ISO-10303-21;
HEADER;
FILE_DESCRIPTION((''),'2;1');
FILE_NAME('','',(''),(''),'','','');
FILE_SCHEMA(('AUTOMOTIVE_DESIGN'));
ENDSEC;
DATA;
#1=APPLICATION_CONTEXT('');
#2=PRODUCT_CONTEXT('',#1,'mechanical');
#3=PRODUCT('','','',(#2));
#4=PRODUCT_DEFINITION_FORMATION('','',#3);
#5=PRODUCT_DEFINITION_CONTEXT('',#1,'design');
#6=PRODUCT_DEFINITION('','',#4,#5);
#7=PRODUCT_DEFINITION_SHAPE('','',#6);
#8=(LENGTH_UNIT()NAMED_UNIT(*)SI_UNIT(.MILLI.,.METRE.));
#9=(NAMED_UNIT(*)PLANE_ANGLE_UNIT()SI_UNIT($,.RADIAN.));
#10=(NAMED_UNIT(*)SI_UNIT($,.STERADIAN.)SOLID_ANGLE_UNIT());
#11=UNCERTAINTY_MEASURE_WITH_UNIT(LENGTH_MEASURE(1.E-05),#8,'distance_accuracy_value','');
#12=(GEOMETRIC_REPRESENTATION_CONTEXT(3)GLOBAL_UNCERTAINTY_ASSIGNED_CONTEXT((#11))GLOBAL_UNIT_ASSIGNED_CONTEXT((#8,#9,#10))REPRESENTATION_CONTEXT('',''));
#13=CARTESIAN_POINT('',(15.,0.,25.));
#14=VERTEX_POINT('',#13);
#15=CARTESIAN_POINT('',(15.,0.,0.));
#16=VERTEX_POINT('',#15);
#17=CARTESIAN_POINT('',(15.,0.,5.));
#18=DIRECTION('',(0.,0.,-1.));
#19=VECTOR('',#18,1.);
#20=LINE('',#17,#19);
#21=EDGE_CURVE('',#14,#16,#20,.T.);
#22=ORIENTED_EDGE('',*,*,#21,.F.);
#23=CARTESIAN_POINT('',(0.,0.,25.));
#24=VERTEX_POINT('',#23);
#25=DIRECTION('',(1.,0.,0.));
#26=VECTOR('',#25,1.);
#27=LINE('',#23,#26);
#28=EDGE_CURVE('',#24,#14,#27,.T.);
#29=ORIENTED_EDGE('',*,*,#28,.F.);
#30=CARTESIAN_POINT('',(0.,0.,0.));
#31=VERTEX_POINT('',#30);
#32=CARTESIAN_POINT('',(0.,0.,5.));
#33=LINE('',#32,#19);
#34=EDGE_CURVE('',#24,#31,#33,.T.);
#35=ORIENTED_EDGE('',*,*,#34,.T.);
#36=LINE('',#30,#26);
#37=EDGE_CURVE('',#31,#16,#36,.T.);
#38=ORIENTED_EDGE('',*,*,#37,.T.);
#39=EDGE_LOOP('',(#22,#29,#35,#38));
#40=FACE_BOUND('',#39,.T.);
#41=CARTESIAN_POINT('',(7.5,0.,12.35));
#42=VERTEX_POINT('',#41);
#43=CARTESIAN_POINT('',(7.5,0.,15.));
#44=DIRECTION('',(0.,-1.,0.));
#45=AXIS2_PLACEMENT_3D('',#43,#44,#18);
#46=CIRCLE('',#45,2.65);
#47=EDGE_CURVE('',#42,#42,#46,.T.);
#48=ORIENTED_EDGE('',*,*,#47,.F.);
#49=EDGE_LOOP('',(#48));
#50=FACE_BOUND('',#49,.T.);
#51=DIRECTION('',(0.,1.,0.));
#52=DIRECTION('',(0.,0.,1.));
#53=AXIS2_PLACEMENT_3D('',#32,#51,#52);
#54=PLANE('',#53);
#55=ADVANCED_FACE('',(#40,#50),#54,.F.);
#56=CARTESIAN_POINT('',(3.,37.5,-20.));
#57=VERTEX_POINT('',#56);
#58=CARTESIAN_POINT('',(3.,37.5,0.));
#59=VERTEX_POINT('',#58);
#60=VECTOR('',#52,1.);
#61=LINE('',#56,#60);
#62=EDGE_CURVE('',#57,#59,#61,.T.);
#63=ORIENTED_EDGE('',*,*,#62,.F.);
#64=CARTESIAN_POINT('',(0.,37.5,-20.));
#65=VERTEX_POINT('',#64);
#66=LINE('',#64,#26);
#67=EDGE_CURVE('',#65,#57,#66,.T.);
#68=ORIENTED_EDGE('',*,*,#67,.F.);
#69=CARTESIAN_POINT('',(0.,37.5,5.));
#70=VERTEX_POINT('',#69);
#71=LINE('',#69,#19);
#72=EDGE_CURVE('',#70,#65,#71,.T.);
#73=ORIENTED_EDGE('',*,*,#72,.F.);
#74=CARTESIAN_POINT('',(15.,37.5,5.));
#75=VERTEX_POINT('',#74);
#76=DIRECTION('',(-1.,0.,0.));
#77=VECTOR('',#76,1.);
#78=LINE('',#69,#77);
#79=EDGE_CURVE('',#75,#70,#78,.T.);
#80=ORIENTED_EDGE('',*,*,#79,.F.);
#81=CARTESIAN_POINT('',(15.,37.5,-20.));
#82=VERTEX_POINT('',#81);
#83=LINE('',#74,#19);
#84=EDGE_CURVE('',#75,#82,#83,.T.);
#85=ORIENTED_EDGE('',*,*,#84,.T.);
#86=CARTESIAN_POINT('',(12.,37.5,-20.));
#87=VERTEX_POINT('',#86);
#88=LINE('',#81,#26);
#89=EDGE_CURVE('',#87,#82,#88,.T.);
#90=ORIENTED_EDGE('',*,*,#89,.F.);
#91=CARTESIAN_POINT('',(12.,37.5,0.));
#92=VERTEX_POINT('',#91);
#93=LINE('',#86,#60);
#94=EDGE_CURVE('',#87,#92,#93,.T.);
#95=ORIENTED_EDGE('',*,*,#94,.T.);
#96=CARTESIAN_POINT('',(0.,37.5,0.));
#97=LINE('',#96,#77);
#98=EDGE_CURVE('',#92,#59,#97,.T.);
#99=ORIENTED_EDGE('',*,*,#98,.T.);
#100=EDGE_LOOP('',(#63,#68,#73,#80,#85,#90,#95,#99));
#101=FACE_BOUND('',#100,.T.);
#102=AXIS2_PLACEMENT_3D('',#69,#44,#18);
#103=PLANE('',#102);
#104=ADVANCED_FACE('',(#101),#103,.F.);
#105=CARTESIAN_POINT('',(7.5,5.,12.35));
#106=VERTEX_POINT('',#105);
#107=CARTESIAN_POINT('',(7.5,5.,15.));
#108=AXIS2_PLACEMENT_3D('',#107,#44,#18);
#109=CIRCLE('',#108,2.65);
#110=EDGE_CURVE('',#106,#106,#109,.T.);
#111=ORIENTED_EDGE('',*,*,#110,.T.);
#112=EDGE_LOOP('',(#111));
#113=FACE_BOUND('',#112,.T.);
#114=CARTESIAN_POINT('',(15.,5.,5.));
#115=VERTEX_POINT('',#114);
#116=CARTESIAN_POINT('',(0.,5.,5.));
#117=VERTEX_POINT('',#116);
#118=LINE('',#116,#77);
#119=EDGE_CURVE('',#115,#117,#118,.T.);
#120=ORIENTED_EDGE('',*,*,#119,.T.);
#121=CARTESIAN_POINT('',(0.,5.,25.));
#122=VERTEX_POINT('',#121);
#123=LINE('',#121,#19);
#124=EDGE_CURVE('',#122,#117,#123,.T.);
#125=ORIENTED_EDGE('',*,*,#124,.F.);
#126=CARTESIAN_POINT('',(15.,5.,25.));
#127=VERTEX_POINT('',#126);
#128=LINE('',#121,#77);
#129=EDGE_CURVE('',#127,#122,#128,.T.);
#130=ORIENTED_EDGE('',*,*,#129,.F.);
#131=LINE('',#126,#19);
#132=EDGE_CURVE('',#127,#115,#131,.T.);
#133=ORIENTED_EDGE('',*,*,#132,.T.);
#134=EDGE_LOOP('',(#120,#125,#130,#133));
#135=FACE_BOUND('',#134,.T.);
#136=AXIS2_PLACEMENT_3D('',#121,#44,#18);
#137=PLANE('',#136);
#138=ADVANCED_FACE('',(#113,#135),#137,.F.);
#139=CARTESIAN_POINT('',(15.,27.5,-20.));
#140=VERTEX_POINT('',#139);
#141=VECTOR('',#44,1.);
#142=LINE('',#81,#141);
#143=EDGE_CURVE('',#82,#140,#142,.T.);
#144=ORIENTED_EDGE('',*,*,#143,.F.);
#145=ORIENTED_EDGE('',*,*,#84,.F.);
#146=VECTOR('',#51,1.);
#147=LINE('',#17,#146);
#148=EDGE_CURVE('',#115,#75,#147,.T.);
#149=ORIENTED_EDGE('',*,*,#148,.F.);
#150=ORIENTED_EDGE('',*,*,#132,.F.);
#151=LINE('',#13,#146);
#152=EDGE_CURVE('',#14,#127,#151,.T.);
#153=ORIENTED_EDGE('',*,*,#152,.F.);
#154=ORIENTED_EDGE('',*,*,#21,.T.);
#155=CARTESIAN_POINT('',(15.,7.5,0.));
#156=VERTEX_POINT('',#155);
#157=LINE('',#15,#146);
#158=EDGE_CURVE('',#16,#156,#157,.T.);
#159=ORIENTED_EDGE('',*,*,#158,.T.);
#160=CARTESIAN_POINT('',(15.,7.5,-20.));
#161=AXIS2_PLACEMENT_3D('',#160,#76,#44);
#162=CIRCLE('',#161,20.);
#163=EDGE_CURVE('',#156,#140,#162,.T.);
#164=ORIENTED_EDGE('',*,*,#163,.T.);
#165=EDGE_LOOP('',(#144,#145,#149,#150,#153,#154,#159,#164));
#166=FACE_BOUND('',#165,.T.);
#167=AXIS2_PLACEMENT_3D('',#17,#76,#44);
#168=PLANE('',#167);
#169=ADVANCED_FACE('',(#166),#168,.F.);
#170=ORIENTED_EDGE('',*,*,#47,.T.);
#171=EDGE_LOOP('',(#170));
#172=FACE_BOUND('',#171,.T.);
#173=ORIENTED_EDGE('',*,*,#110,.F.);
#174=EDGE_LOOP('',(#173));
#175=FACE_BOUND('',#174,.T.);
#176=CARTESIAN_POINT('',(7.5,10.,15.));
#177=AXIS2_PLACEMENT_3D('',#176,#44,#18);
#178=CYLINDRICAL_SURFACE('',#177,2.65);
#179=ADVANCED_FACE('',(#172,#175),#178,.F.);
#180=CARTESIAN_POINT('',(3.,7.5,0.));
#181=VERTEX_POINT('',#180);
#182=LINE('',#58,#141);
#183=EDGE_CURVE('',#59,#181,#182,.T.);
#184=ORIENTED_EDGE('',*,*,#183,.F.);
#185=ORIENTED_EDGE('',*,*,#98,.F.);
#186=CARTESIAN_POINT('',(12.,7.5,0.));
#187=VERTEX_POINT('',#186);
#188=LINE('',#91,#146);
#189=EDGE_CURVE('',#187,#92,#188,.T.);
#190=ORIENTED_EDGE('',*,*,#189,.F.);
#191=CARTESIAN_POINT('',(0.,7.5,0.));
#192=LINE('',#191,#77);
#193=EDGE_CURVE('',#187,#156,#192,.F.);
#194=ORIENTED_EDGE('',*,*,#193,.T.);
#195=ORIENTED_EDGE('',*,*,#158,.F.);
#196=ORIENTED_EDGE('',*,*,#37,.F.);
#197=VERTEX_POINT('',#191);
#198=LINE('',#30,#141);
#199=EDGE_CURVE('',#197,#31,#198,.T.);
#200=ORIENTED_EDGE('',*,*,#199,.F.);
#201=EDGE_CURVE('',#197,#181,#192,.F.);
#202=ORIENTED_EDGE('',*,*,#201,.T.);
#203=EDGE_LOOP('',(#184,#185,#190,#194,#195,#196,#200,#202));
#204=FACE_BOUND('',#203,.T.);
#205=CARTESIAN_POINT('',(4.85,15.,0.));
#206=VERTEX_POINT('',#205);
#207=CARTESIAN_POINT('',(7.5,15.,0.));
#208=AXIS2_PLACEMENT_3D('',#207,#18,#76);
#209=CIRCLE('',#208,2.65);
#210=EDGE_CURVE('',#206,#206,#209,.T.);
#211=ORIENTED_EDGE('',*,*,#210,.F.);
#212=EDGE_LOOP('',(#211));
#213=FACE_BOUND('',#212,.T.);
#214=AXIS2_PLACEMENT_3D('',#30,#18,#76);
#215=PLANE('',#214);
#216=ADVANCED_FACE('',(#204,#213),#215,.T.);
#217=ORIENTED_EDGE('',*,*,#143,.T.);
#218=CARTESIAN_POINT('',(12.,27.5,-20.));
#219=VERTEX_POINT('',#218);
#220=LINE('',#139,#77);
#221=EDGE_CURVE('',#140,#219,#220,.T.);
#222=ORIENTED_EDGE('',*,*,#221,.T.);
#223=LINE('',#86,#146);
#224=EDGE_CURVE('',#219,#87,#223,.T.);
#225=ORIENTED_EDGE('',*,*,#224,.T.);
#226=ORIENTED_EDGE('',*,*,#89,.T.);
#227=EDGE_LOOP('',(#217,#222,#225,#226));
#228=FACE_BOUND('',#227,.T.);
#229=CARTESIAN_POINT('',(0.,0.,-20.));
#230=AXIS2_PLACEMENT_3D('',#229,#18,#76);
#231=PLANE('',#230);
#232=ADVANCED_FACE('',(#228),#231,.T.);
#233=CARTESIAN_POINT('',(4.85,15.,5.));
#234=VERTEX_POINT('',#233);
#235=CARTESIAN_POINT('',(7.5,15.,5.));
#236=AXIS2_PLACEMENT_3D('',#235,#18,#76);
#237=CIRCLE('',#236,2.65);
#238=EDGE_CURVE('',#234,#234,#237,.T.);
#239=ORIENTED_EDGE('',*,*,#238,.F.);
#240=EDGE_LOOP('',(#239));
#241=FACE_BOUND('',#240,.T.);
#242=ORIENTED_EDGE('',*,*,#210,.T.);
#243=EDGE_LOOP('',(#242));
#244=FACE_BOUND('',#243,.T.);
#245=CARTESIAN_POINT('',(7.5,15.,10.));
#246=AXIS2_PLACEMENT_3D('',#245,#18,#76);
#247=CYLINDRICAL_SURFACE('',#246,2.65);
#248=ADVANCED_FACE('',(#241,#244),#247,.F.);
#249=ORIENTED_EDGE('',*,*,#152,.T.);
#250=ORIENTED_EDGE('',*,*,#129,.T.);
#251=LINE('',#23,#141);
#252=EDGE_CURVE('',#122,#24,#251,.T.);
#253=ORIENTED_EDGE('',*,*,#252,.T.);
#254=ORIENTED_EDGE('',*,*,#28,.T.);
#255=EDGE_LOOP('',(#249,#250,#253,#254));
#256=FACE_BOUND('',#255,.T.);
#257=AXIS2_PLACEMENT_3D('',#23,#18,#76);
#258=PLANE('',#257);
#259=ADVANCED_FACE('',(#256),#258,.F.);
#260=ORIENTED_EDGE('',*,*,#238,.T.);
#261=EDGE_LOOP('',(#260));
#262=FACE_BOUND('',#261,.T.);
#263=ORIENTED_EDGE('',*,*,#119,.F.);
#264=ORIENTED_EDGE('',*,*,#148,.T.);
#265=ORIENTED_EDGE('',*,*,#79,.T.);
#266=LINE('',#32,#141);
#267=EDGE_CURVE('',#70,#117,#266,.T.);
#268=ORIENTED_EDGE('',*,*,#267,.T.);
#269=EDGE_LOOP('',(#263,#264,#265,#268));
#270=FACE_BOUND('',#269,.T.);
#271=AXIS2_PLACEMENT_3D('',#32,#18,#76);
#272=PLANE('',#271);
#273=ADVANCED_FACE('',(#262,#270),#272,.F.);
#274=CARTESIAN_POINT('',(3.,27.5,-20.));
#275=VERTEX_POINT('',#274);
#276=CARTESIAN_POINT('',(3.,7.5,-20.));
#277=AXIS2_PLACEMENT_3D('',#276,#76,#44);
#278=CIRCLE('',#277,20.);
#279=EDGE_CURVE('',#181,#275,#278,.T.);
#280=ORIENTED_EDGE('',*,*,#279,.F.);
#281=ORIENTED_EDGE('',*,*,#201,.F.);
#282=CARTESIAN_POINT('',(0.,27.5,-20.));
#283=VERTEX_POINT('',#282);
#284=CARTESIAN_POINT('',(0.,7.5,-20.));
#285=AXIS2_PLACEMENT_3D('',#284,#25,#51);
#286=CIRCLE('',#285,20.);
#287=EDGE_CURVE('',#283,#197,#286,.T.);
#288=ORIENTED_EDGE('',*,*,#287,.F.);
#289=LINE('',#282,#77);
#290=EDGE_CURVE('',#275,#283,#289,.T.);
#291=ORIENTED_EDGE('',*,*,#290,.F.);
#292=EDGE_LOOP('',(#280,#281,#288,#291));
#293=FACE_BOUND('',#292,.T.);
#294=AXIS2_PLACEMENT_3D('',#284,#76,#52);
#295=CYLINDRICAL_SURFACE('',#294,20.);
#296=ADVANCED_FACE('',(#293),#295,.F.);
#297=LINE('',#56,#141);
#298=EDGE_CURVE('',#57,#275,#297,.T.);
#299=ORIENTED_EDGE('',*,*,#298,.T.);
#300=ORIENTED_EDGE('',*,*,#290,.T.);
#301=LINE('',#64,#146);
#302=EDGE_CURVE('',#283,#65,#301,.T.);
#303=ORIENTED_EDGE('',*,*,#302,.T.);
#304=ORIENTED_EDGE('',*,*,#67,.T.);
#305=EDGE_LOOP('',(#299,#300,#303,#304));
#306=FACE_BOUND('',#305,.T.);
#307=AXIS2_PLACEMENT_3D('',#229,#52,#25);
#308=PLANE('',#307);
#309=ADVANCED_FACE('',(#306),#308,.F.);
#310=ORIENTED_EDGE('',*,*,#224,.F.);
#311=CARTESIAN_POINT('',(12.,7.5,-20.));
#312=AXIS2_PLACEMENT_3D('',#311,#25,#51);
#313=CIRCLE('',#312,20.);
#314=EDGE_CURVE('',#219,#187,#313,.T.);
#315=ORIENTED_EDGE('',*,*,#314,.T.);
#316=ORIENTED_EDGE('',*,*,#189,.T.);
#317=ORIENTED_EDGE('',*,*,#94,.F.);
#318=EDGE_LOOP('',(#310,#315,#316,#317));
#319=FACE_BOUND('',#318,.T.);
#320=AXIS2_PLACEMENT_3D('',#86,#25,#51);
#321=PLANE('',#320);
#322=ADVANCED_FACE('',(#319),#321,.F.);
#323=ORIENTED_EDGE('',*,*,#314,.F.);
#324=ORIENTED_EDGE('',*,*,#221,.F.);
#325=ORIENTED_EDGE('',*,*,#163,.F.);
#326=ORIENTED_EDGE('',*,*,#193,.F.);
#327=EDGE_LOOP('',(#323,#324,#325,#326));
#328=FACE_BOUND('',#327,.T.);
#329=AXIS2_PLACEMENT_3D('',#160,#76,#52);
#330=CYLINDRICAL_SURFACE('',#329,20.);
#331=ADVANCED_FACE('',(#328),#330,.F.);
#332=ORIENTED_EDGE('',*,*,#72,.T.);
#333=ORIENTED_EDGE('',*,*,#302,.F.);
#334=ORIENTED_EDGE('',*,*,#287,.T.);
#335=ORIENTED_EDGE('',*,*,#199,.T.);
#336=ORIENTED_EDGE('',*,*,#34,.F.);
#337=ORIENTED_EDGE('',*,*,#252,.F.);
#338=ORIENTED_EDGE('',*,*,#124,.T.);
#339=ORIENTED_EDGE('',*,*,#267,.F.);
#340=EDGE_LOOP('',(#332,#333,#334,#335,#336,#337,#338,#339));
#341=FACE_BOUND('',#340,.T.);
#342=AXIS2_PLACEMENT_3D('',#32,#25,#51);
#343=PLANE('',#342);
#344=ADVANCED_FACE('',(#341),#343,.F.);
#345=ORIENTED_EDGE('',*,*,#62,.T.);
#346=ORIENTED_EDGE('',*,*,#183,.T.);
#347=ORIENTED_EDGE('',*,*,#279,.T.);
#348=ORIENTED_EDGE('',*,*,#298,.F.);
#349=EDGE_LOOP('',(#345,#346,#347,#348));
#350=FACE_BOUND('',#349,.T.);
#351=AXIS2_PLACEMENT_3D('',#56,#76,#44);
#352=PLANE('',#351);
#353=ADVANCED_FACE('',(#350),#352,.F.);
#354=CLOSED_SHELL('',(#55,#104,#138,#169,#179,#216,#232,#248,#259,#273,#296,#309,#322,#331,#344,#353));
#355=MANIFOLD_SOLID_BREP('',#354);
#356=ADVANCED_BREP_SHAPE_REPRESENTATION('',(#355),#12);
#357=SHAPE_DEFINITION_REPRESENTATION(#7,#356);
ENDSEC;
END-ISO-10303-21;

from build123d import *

# Parameters (mm, degrees)
SKETCH2_W           = 15
SKETCH2_H           = 37.5
BOSS_EXTRUDE1_DEPTH = 5
SKETCH3_W           = 15
SKETCH3_H           = 5
BOSS_EXTRUDE2_DEPTH = 20
SKETCH4_W           = 3
SKETCH4_H           = 10
BOSS_EXTRUDE3_DEPTH = 20
FILLET1_R           = 20
SKETCH6_R           = 2.65
CUT_EXTRUDE2_DEPTH  = 10
SKETCH7_R           = 2.65
CUT_EXTRUDE3_DEPTH  = 10


with BuildPart() as part:
    # Sketch2 → Boss-Extrude1 (new body)
    with BuildSketch(Plane.XY):
        with Locations((7.5, 18.75)):
            Rectangle(SKETCH2_W, SKETCH2_H)
    extrude(amount=BOSS_EXTRUDE1_DEPTH)

    # Sketch3 → Boss-Extrude2 (add)
    with BuildSketch(Plane.XY.offset(5)):
        with Locations((7.5, 2.5)):
            Rectangle(SKETCH3_W, SKETCH3_H)
    extrude(amount=BOSS_EXTRUDE2_DEPTH)

    # Sketch4 → Boss-Extrude3 (add)
    with BuildSketch(Plane(origin=(0, 0, 0), x_dir=(-1, 0, 0), z_dir=(0, 0, -1))):
        with Locations((-13.5, 32.5)):
            Rectangle(SKETCH4_W, SKETCH4_H)
        with Locations((-1.5, 32.5)):
            Rectangle(SKETCH4_W, SKETCH4_H)
    extrude(amount=BOSS_EXTRUDE3_DEPTH)

    # Fillet1
    fillet1_edges = [part.edges().sort_by_distance(p)[0] for p in [
        (1.5, 27.5, 0),
        (13.5, 27.5, 0),
    ]]
    fillet(fillet1_edges, radius=FILLET1_R - 0.0001)  # a hair under: the kernel refuses the full size

    # Sketch6 → Cut-Extrude2 (cut)
    with BuildSketch(Plane.XZ):
        with Locations(Location((7.5, 15, 0), (0, 0, 270))):
            Circle(SKETCH6_R)
    extrude(amount=-CUT_EXTRUDE2_DEPTH, mode=Mode.SUBTRACT)

    # Sketch7 → Cut-Extrude3 (cut)
    with BuildSketch(Plane(origin=(0, 0, 0), x_dir=(-1, 0, 0), z_dir=(0, 0, -1))):
        with Locations((-7.5, 15)):
            Circle(SKETCH7_R)
    extrude(amount=-CUT_EXTRUDE3_DEPTH, mode=Mode.SUBTRACT)


solid = part.part
